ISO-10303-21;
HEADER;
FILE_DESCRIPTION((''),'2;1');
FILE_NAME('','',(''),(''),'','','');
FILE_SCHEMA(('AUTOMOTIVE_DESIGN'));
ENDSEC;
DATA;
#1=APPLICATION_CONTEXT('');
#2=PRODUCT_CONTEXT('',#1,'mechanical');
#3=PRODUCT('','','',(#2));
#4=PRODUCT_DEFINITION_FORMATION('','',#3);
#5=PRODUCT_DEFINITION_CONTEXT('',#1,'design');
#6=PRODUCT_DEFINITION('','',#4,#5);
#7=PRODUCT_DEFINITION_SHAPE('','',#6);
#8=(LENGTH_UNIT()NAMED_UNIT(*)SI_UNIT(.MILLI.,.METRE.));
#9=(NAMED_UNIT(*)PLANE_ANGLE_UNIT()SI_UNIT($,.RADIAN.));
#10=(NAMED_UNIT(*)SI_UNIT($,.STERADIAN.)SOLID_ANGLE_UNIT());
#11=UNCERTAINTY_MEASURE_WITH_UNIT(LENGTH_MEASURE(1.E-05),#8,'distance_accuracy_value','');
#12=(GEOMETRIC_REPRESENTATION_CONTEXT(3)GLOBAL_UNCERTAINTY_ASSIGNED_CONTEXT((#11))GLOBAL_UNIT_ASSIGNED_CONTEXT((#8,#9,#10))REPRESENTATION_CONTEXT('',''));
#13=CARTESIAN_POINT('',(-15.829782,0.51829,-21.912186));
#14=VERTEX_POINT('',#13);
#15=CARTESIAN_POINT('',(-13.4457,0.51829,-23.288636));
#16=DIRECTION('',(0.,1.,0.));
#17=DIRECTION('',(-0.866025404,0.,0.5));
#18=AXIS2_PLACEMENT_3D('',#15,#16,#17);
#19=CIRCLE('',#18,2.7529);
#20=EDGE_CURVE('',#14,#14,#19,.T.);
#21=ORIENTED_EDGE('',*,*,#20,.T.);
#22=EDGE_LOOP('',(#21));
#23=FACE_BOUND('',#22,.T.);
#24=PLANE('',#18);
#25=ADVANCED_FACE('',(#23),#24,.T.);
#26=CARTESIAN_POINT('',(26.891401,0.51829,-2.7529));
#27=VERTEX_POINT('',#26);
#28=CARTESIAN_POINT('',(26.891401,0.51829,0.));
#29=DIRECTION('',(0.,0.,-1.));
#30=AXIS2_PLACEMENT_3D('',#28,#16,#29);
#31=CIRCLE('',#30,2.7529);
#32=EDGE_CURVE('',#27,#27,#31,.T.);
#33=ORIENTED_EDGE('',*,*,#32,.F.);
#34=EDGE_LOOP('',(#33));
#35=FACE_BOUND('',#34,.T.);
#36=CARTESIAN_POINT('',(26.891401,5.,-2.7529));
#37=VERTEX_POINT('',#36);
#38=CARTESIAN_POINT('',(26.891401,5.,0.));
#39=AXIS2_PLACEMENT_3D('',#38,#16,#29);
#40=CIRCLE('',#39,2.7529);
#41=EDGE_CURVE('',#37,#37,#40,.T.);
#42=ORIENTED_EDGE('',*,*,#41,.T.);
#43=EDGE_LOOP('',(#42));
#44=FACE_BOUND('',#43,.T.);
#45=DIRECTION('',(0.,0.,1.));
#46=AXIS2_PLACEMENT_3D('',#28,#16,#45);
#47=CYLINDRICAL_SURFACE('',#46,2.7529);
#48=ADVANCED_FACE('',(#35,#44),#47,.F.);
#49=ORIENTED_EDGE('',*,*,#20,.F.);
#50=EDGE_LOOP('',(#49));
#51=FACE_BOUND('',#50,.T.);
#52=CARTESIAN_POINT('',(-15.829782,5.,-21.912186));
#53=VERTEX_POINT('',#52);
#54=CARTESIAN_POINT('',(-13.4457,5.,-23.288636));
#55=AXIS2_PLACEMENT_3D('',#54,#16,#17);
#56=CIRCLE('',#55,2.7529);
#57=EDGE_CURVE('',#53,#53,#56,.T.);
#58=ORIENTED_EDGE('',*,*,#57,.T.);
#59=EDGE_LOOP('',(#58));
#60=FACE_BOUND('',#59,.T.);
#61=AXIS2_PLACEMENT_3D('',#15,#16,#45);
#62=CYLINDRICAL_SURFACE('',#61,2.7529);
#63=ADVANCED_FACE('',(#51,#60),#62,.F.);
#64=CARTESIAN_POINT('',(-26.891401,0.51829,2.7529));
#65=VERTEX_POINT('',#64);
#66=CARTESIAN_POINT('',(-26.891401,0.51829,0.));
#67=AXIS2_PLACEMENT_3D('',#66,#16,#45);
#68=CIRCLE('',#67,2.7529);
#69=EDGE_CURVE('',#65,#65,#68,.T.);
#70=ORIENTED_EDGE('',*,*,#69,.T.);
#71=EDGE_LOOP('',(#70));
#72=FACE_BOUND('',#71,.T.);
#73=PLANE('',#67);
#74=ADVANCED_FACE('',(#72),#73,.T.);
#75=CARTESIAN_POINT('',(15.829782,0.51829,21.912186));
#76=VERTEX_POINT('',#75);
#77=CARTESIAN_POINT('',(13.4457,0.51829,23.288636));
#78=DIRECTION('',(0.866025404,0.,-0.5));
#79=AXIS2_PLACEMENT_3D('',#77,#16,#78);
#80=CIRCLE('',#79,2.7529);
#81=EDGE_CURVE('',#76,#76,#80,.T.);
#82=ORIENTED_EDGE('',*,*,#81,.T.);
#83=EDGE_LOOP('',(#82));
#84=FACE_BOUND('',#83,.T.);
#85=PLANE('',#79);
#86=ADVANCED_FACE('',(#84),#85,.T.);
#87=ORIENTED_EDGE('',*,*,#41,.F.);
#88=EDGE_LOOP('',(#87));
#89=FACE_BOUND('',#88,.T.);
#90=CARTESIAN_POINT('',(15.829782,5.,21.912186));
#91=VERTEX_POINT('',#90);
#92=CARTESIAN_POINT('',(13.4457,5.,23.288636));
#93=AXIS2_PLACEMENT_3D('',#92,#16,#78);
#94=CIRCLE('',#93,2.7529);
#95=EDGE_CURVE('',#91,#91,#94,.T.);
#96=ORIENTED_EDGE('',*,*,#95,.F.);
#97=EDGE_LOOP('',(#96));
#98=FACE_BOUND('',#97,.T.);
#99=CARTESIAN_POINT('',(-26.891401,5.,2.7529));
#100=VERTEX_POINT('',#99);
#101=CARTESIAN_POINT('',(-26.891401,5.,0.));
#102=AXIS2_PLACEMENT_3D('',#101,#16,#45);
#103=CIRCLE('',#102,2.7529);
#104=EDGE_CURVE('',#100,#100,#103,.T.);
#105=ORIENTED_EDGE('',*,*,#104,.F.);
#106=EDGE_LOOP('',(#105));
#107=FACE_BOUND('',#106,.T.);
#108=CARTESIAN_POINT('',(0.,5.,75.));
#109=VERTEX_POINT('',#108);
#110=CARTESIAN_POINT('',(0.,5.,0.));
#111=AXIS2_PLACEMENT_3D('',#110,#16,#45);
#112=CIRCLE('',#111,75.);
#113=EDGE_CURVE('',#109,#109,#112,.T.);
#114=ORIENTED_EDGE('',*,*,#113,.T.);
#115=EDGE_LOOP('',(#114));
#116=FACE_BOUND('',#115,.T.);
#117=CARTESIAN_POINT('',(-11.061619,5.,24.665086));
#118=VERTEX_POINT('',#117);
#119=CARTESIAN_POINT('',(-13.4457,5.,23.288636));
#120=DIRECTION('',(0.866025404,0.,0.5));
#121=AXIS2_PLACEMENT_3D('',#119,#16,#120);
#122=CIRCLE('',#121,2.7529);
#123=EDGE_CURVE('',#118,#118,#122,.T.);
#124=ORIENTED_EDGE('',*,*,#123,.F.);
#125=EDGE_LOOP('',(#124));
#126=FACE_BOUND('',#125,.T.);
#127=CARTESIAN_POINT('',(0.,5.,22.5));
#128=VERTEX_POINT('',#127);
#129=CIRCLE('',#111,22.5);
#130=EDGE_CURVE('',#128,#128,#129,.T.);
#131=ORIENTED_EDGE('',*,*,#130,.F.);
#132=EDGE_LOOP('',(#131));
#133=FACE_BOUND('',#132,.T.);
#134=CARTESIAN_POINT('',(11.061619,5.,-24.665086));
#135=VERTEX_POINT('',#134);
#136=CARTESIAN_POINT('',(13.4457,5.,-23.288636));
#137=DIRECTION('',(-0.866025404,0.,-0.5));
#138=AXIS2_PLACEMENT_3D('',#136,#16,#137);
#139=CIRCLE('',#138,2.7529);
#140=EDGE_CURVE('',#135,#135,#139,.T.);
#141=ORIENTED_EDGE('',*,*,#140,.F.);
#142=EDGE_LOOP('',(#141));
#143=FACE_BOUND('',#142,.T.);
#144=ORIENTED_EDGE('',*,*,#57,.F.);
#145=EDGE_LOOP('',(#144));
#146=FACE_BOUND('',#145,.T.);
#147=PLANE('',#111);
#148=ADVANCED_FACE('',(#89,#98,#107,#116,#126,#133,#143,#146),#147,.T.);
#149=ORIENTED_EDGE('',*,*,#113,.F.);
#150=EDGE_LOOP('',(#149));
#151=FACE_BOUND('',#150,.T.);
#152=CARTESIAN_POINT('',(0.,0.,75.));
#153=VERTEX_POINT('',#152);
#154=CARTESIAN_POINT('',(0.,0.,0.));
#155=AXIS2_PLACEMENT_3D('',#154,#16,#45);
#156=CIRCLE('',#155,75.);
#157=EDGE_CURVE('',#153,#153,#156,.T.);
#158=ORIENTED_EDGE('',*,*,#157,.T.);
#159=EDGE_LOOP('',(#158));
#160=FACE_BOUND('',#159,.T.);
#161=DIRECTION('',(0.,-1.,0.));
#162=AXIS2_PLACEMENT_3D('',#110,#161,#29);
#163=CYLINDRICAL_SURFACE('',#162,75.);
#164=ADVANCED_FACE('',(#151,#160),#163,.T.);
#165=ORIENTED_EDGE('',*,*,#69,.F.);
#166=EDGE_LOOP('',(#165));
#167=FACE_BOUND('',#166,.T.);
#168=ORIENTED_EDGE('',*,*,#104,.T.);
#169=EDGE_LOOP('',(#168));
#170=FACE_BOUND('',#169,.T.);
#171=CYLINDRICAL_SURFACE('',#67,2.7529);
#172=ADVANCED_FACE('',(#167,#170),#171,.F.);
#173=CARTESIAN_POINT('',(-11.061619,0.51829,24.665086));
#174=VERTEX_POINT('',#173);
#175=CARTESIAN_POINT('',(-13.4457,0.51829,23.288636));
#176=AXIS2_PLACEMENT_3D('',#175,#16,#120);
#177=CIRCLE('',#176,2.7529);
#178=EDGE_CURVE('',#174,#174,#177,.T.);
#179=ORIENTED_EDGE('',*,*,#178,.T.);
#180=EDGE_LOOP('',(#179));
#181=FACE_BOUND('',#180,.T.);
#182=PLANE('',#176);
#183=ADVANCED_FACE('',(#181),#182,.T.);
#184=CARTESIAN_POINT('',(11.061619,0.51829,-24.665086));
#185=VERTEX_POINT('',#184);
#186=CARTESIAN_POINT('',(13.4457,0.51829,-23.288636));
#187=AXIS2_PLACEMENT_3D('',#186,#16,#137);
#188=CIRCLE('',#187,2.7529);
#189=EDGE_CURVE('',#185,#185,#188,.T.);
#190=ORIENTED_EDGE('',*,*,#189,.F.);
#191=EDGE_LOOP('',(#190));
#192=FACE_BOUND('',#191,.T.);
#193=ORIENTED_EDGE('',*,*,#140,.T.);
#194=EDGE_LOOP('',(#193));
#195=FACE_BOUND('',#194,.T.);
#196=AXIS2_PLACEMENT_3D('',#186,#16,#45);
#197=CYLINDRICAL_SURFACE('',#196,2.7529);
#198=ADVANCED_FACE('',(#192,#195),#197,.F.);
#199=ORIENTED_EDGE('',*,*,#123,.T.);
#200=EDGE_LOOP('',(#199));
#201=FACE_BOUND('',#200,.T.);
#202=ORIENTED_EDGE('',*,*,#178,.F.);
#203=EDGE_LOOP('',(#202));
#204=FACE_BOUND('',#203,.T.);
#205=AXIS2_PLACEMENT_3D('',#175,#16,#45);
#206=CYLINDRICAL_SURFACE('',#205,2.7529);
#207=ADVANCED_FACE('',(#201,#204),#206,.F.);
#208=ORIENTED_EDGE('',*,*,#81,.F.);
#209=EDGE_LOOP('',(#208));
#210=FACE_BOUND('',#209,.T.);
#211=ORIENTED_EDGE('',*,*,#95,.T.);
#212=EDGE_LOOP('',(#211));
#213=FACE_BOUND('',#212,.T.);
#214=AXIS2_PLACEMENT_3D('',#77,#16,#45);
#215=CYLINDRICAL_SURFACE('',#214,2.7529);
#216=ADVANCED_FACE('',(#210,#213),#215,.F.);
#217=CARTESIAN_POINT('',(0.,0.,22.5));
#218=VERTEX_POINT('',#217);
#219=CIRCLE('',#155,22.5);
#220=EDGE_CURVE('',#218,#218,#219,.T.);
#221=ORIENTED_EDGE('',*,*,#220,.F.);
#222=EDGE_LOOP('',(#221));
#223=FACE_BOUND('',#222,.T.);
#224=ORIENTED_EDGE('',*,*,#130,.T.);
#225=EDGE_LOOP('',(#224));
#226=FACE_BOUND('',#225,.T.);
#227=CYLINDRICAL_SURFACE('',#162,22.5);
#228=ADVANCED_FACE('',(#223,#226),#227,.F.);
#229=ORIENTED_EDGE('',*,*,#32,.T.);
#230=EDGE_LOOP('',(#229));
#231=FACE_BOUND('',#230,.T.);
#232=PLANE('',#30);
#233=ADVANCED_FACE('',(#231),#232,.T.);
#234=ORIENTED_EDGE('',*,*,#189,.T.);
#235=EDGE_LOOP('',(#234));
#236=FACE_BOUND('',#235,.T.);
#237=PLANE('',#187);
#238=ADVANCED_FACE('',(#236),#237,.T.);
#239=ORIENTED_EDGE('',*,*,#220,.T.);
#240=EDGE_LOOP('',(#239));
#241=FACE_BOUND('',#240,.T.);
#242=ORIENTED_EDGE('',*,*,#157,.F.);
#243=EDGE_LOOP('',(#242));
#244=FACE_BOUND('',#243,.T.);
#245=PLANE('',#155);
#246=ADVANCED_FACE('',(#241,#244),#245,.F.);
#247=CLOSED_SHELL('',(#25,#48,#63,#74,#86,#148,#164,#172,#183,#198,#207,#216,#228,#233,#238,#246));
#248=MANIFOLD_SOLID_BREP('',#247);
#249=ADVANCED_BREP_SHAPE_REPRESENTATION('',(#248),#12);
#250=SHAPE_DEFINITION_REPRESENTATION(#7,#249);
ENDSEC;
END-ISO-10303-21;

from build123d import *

# Parameters (mm, degrees)
SKETCH1_R           = 75
BOSS_EXTRUDE1_DEPTH = 5
SKETCH2_R           = 22.5
CUT_EXTRUDE1_DEPTH  = 107.183802908
SKETCH3_R           = 2.75290013
CUT_EXTRUDE2_DEPTH  = 4.481709637
CIRPATTERN1_COUNT   = 6


with BuildPart() as part:
    # Sketch1 → Boss-Extrude1 (new body)
    with BuildSketch(Plane(origin=(0, 0, 0), x_dir=(1, 0, 0), z_dir=(0, 1, 0))):
        Circle(SKETCH1_R)
    extrude(amount=BOSS_EXTRUDE1_DEPTH)

    # Sketch2 → Cut-Extrude1 (cut, through all)
    with BuildSketch(Plane(origin=(0, 0, 0), x_dir=(1, 0, 0), z_dir=(0, 1, 0))):
        Circle(SKETCH2_R)
    extrude(amount=CUT_EXTRUDE1_DEPTH, mode=Mode.SUBTRACT)

    # Sketch3 → Cut-Extrude2 (cut)
    with BuildSketch(Plane(origin=(0, 5, 0), x_dir=(1, 0, 0), z_dir=(0, 1, 0))):
        with Locations((-26.891400655, 0)):
            Circle(SKETCH3_R)
    cut_extrude2 = extrude(amount=-CUT_EXTRUDE2_DEPTH, mode=Mode.SUBTRACT)

    # CirPattern1: Cut-Extrude2 ×6 about axis
    cirpattern1_axis = Axis((0, 0, 0), (0, 1, 0))
    for i in range(1, CIRPATTERN1_COUNT):
        add(cut_extrude2.rotate(cirpattern1_axis, i * 360 / CIRPATTERN1_COUNT), mode=Mode.SUBTRACT)


solid = part.part
